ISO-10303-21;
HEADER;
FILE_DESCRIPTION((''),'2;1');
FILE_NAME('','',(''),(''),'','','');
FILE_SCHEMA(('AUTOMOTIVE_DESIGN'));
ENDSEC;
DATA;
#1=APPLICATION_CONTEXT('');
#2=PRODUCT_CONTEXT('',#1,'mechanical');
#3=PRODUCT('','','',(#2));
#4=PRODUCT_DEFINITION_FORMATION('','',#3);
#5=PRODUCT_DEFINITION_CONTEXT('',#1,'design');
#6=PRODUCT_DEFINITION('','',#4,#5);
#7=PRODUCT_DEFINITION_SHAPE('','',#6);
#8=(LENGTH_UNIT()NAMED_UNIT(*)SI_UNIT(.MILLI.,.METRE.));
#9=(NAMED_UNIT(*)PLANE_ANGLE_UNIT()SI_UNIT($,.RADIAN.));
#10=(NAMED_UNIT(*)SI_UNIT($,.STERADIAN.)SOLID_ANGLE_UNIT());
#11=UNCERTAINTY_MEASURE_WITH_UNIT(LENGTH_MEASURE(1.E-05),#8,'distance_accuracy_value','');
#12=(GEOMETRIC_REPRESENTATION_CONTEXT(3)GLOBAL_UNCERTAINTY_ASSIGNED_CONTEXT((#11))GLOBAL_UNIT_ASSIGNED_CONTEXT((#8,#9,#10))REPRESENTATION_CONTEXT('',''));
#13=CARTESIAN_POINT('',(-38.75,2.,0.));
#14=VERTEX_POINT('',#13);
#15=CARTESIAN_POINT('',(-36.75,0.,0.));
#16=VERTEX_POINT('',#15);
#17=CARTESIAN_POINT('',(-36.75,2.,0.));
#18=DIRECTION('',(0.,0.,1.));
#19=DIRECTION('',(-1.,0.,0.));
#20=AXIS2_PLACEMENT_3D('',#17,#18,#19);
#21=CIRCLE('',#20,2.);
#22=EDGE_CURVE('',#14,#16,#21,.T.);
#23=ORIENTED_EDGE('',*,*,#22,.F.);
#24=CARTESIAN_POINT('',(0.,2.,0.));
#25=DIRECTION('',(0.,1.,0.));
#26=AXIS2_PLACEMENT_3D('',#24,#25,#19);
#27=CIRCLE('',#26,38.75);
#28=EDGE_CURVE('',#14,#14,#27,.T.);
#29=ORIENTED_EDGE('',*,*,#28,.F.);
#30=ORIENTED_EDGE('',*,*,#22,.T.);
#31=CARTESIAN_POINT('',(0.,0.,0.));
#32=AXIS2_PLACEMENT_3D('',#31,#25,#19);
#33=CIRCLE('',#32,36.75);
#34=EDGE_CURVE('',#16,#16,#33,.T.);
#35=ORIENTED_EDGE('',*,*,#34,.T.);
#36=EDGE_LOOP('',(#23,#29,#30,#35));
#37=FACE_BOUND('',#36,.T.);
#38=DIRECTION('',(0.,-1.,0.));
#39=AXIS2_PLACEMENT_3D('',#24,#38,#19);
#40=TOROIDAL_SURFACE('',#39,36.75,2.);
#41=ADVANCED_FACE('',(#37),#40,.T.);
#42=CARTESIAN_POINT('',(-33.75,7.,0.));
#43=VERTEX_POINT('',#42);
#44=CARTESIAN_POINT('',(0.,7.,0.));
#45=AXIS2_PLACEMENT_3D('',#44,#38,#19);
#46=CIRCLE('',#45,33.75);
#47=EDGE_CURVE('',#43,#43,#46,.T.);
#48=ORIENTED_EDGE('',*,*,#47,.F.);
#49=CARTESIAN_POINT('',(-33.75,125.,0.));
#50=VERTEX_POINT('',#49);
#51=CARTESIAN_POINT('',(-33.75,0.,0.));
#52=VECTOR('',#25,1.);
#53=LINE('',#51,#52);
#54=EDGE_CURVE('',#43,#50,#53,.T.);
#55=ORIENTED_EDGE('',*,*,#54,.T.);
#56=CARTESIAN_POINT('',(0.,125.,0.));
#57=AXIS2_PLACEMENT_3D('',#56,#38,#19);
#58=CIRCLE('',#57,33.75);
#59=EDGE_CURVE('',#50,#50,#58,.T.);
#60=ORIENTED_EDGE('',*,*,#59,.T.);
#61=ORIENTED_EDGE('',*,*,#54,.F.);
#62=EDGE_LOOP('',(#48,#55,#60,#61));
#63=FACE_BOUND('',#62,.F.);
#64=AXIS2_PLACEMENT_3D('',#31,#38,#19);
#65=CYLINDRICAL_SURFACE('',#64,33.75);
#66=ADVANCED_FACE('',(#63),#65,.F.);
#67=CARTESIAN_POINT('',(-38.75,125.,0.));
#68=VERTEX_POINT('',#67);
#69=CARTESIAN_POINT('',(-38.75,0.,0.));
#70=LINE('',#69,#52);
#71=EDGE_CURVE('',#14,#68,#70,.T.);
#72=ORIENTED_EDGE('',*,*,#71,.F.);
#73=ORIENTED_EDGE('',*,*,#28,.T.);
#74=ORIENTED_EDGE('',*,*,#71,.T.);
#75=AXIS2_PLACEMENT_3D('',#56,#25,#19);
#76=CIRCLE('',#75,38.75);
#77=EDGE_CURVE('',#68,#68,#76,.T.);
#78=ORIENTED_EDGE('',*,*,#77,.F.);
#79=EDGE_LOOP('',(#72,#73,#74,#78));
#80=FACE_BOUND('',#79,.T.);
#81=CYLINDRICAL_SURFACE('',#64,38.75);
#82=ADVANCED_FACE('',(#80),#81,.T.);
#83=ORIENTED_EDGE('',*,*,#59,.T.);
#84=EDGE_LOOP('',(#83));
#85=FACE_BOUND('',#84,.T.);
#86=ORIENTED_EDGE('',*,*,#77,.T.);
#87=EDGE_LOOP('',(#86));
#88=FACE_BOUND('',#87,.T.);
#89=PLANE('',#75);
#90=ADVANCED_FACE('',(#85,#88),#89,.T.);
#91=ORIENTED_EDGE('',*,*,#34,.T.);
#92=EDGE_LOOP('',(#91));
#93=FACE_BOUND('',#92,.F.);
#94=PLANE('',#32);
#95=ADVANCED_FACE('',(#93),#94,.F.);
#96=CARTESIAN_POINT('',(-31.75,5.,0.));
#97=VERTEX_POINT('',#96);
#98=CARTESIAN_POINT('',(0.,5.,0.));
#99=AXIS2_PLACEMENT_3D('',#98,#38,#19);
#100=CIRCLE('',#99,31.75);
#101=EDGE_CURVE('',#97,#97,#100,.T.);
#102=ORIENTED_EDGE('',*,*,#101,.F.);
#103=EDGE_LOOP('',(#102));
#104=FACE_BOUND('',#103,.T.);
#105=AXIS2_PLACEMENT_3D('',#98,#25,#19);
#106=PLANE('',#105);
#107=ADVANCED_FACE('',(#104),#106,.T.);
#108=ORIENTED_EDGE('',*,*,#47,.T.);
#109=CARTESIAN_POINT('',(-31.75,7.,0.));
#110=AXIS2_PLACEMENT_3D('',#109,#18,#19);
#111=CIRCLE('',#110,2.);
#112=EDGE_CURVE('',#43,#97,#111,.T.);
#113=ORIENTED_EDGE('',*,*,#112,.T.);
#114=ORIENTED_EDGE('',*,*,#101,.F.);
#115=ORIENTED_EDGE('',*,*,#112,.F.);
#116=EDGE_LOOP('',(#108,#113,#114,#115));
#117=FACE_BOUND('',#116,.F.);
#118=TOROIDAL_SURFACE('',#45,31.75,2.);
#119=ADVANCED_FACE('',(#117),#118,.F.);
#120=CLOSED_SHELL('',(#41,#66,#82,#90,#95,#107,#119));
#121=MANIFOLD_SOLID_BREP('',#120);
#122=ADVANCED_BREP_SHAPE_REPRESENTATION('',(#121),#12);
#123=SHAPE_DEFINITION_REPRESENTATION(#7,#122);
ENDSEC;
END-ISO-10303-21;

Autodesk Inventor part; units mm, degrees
ref_plane "YZ Plane" through (0, 0, 0) normal (1, 0, 0) x (0, 1, 0)
ref_plane "XZ Plane" through (0, 0, 0) normal (0, 1, 0) x (-1, 0, 0)
ref_plane "XY Plane" through (0, 0, 0) normal (0, 0, 1) x (1, 0, 0)
sketch "Sketch1" plane through (0, 0, 0) normal (0, 1, 0) x (-1, 0, 0)
  circle A0 centre (0, 0) radius 38.75
  dimension "d0" = 77.5
extrude "Extrusion1" add sketch "Sketch1" along normal blind 125
shell "Shell1" thickness 5 removed faces 1 at (-4.4693, 125, 5.6043)
fillet "Fillet1" radius 2 2 edges at (33.75, 5, 0) (38.75, 0, 0)
properties part number "Inner Layer"
